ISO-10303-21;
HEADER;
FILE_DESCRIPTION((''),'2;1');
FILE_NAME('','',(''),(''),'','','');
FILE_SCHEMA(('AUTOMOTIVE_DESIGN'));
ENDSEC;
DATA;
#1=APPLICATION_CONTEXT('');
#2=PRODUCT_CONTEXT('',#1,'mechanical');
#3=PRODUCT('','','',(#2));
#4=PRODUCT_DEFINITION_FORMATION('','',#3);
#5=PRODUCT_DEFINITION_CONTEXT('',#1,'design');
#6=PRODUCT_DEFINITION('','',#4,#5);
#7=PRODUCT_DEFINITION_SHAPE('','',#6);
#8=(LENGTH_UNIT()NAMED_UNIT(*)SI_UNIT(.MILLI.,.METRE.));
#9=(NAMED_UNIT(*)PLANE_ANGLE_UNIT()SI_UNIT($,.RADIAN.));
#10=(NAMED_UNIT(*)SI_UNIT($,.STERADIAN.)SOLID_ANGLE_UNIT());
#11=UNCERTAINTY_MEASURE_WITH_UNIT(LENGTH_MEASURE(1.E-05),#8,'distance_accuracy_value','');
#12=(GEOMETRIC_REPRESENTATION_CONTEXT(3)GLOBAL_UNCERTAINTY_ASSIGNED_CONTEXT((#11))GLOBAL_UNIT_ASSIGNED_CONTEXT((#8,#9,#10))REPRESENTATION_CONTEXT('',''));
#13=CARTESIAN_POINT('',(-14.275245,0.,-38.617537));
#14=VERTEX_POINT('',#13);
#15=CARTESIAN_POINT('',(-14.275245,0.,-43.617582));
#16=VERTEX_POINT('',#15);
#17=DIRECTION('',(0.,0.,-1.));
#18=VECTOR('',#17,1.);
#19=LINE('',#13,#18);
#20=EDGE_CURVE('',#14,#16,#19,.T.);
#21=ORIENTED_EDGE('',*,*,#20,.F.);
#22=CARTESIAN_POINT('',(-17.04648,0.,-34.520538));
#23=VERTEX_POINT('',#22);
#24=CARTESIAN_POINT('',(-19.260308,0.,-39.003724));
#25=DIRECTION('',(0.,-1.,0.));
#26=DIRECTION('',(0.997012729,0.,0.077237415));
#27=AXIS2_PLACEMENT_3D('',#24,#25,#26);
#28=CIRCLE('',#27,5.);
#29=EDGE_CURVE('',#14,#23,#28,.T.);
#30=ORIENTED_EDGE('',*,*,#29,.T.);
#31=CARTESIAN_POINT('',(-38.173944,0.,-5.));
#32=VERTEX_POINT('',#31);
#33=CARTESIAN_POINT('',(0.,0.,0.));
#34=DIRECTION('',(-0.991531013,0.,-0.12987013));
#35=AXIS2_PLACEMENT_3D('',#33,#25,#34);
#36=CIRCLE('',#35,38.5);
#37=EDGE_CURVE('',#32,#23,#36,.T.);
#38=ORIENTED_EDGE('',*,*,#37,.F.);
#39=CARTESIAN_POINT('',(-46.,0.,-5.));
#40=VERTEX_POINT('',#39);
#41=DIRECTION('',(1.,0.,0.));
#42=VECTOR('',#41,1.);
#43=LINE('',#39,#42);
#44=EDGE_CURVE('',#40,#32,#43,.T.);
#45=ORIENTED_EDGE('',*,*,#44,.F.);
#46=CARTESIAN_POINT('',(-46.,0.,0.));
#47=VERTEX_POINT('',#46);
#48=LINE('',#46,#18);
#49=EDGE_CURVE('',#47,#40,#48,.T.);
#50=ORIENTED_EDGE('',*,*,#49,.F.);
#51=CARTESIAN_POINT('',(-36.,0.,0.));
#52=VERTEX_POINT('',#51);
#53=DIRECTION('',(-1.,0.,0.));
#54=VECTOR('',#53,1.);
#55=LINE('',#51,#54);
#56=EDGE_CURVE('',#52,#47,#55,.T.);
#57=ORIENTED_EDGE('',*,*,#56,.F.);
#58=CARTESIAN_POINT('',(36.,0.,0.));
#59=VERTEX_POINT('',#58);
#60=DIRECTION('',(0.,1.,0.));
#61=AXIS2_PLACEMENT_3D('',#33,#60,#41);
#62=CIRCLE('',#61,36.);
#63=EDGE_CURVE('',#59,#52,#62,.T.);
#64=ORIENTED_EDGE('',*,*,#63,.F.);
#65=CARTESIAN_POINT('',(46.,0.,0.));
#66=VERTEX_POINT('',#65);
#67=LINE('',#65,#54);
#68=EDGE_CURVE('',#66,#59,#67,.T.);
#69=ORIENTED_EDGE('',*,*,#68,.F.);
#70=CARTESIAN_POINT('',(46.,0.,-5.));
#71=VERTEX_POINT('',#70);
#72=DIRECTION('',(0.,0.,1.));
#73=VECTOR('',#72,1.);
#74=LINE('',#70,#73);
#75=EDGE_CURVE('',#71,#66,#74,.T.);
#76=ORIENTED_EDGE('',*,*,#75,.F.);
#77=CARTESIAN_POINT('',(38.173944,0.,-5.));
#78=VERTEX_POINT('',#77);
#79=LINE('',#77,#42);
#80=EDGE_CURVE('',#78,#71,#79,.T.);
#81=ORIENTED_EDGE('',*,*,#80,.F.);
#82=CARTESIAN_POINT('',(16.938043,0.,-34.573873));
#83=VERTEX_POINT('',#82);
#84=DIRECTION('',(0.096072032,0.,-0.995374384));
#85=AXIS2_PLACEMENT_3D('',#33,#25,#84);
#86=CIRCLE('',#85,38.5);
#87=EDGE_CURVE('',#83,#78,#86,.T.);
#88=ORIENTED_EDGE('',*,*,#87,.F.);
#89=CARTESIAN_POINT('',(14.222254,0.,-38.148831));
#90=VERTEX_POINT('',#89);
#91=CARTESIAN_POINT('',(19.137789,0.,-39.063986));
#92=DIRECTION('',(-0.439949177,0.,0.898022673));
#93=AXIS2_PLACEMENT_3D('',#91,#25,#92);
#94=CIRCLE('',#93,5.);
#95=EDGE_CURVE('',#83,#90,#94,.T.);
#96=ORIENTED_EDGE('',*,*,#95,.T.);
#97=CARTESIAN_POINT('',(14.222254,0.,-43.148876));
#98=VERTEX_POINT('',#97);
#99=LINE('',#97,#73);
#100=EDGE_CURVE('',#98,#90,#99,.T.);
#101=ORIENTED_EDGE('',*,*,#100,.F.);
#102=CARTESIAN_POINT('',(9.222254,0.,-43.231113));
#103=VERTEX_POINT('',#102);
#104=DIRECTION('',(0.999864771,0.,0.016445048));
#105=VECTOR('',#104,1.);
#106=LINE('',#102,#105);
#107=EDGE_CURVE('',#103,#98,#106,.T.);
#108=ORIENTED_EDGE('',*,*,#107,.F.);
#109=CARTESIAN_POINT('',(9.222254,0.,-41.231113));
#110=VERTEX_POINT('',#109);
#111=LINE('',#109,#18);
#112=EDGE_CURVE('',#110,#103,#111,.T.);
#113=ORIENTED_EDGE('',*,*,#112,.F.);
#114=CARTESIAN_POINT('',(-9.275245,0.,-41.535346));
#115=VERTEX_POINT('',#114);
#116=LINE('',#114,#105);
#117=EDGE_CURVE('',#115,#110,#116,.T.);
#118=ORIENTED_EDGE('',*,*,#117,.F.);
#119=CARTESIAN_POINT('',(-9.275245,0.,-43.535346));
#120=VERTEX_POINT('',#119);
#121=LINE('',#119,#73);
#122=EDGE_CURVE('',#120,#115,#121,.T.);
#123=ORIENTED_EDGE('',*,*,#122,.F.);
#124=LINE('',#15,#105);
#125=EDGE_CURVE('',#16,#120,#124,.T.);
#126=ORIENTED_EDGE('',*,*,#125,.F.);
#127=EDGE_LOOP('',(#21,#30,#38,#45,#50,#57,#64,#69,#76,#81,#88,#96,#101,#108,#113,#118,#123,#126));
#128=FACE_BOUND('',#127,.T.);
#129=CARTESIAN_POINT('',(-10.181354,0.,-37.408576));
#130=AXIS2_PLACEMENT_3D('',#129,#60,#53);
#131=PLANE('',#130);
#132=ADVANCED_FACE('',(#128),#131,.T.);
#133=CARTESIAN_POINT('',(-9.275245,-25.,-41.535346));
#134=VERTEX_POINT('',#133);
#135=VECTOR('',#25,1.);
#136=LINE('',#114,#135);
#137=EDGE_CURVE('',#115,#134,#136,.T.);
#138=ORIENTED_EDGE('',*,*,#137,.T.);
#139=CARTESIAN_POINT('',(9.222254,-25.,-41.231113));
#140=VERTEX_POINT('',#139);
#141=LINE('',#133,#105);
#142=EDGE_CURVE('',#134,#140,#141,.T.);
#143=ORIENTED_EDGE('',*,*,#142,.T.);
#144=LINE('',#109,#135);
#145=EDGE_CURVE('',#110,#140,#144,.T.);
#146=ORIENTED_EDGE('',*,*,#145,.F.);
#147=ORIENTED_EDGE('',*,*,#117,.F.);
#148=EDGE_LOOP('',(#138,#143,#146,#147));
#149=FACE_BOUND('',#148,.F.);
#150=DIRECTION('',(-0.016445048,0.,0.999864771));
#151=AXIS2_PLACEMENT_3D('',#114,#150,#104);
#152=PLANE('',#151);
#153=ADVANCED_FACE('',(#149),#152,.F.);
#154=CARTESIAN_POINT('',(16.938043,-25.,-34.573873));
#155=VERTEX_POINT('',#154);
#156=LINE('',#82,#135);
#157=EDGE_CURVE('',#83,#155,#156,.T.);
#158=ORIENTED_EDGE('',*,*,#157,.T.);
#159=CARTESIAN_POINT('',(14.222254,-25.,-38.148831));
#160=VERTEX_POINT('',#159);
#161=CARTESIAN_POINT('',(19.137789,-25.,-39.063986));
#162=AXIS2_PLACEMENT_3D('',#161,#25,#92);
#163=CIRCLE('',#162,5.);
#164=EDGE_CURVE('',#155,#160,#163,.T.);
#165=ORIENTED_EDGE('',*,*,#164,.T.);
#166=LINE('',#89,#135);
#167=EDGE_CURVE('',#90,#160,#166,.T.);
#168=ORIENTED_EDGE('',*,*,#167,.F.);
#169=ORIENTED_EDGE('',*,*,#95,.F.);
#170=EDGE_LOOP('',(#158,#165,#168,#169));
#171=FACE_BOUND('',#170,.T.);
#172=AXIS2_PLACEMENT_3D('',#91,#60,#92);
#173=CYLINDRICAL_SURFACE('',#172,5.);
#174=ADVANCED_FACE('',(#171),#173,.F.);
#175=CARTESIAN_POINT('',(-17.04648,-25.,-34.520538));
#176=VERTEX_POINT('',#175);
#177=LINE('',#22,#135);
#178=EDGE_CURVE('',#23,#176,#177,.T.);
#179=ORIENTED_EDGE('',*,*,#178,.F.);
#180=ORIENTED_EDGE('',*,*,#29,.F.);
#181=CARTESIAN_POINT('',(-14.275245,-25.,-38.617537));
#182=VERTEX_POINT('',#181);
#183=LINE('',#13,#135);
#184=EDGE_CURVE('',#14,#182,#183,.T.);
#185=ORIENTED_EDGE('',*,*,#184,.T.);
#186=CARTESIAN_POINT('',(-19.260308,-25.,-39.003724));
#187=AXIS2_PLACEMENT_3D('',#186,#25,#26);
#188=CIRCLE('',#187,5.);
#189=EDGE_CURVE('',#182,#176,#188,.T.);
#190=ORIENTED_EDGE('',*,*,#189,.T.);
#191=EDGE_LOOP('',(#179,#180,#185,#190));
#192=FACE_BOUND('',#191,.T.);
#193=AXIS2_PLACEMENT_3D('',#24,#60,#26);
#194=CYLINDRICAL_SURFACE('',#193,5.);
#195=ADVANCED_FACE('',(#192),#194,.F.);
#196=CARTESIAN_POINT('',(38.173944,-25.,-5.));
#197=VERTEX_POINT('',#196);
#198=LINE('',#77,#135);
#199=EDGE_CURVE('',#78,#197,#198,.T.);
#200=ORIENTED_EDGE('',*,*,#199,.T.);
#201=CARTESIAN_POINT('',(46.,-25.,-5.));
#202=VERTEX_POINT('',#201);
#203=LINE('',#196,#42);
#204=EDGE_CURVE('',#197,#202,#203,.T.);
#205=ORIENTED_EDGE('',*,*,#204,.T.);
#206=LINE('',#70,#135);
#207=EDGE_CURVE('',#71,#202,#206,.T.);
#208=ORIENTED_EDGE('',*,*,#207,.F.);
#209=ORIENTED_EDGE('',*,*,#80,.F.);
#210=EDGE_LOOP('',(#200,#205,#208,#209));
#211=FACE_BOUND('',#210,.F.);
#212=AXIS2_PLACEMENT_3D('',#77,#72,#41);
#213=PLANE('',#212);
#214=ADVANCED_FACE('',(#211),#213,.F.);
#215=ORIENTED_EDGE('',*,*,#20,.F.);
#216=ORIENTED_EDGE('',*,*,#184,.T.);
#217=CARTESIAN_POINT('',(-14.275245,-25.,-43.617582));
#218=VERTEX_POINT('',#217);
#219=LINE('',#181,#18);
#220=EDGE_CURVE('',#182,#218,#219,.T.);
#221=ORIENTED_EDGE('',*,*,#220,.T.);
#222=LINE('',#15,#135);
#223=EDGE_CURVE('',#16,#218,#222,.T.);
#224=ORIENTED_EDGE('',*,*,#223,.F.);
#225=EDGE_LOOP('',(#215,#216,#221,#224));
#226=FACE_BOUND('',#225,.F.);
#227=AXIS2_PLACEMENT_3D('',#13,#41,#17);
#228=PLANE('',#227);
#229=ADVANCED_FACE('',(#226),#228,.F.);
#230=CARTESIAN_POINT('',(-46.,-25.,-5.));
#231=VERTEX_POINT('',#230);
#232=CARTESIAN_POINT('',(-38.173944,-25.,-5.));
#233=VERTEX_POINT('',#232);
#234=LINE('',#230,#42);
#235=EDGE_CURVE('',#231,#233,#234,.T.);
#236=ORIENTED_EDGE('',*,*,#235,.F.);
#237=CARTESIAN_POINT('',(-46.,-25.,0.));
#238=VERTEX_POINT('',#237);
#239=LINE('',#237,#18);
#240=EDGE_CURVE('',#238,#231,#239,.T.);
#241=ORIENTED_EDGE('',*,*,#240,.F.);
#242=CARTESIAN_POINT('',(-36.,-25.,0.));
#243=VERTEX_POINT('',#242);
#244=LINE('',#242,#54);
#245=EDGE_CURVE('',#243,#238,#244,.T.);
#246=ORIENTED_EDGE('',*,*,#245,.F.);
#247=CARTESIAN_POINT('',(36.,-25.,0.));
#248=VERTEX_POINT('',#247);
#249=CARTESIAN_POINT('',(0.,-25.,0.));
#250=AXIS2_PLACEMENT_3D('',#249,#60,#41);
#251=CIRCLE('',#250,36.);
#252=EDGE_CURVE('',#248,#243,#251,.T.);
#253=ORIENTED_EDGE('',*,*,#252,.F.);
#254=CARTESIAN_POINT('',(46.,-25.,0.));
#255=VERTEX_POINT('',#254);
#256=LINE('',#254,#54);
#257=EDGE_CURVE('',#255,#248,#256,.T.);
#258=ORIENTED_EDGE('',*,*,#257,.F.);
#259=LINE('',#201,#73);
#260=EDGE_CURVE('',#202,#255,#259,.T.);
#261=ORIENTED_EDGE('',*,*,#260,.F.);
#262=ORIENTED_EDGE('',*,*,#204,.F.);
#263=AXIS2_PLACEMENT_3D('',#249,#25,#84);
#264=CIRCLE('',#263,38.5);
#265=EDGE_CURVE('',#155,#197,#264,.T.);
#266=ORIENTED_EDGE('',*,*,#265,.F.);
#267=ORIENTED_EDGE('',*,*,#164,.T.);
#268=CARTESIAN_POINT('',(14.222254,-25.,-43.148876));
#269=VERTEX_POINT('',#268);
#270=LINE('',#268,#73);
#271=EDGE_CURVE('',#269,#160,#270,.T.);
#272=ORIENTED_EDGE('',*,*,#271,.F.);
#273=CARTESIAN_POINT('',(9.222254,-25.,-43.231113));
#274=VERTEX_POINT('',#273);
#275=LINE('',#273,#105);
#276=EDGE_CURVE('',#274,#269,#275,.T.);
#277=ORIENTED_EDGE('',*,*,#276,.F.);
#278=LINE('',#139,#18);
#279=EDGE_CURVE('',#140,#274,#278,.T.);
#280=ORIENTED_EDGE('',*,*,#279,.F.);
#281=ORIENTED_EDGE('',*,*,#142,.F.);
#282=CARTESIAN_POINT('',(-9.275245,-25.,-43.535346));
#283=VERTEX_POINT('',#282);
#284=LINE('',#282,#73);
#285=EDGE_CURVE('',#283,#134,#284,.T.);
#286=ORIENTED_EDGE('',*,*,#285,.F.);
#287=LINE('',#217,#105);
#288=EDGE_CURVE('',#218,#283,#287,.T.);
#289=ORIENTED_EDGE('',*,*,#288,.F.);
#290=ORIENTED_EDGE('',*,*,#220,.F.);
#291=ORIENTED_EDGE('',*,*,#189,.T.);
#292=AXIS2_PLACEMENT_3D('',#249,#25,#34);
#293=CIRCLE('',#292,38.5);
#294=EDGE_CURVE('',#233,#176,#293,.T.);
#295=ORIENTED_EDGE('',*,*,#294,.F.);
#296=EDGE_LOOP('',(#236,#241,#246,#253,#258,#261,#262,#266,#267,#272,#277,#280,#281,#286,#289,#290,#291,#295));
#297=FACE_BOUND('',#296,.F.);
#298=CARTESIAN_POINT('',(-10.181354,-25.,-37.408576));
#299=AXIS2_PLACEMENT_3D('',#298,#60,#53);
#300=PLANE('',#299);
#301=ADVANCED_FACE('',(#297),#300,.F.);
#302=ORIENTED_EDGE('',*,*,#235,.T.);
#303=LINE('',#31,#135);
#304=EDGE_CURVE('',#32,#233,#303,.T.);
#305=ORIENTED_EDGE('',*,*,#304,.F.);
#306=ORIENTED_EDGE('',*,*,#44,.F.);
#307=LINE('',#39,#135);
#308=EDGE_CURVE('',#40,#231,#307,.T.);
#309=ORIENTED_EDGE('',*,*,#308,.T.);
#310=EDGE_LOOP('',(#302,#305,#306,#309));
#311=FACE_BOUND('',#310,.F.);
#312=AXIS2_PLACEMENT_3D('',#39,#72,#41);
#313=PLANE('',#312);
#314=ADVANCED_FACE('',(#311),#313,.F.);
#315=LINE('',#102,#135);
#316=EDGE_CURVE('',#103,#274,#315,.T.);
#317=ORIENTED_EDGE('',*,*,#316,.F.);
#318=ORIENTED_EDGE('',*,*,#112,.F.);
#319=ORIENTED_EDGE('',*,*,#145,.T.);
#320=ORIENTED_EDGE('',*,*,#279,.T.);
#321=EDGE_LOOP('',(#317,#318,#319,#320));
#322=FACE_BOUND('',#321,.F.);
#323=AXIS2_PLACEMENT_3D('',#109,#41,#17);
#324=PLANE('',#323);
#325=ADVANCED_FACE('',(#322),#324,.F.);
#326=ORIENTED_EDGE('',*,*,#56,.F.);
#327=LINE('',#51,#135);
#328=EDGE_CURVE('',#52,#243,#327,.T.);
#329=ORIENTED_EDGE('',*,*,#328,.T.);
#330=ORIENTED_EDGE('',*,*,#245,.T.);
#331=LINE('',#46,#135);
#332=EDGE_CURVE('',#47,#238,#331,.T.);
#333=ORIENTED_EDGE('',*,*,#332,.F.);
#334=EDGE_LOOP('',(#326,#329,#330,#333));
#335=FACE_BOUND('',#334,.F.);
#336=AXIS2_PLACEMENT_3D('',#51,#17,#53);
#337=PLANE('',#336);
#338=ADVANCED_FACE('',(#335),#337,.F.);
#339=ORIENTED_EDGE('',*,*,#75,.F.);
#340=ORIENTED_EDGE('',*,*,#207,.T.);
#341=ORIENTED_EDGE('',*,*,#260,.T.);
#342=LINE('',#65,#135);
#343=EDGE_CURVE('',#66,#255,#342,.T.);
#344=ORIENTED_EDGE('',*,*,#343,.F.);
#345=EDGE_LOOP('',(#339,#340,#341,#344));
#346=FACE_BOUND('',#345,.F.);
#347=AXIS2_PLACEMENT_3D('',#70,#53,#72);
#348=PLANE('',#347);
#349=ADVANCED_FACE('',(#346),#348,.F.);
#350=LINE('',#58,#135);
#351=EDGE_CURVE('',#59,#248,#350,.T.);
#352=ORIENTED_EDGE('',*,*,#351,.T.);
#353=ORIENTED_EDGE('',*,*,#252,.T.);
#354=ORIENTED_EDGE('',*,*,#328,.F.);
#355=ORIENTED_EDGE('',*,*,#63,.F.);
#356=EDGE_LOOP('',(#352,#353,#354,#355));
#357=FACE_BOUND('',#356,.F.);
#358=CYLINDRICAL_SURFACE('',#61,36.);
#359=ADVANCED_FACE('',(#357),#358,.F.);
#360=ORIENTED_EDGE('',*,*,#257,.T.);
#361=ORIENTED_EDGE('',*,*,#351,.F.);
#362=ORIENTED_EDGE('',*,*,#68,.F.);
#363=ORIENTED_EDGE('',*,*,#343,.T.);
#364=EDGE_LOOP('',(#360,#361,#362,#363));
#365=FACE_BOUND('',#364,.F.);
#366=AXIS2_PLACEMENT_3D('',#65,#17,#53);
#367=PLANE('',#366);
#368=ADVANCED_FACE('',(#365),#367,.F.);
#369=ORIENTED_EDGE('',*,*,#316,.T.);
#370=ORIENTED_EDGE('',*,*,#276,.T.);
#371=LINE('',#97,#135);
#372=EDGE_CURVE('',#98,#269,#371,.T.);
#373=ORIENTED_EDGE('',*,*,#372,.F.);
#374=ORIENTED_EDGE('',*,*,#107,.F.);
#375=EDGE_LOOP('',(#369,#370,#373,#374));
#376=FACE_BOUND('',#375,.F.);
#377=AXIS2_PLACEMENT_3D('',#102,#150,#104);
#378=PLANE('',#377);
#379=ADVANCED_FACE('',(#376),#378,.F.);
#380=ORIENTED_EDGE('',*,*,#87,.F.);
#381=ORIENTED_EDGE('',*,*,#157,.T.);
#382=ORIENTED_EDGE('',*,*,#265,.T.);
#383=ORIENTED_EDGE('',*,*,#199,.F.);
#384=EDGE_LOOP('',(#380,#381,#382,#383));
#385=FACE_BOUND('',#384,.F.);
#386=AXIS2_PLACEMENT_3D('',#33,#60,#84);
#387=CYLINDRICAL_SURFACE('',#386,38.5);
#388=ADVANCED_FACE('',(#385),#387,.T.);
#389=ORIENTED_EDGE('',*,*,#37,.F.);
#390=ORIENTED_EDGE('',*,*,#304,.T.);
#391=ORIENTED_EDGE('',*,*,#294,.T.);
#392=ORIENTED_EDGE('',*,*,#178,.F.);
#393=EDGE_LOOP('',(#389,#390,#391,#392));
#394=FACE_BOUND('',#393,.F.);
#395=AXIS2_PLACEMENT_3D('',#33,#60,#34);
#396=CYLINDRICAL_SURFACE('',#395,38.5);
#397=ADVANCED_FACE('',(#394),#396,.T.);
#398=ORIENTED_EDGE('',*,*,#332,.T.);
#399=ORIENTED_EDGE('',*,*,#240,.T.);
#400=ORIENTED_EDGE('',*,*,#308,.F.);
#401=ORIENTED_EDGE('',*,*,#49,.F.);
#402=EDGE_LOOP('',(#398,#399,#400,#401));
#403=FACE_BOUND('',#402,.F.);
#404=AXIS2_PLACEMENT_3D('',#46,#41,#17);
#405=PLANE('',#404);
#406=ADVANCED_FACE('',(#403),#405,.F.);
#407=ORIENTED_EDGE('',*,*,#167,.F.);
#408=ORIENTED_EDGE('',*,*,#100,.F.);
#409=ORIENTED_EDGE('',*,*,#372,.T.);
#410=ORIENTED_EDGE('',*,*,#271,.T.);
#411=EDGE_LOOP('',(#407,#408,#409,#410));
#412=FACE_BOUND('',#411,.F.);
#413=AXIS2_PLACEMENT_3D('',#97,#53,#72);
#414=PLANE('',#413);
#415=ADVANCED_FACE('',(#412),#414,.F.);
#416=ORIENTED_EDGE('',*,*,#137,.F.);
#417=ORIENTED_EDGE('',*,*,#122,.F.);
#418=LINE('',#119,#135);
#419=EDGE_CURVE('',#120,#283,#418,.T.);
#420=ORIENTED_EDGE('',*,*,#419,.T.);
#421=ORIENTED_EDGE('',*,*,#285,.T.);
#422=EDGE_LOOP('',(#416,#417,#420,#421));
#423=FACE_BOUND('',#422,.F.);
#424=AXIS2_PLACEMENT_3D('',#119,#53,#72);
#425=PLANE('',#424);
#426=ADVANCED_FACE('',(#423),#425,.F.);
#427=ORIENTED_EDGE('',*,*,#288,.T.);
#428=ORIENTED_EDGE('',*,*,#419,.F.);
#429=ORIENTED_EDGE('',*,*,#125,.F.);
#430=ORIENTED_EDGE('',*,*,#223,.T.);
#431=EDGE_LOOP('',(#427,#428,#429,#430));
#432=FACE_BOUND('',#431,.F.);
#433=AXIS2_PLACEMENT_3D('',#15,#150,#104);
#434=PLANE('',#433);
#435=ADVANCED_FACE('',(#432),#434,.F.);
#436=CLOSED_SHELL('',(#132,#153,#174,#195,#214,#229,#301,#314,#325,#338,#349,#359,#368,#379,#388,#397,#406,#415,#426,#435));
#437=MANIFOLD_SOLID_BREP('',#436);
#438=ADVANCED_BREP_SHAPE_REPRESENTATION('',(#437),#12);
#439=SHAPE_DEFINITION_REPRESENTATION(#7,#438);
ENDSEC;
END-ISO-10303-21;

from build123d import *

# Parameters (mm, degrees)
F1_DEPTH    = 25
F2_T1_DEPTH = 25


# Not quite as in the source:
# - a fillet or chamfer that OpenCascade refuses, or shapes differently, is made with other operations: its cross-section is extruded or revolved along the edge and cut away or added


with BuildPart() as f1:
    # F0 (on Front) → F1 (new body)
    with BuildSketch(Plane.XZ):
        with BuildLine():
            ThreePointArc((36, 0), (0, -36), (-36, 0))
            Line((-36, 0), (-38.5, 0))
            Line((-38.5, 0), (-46, 0))
            Line((-46, 0), (-46, -5))
            Line((-46, -5), (-38.1739439933, -5))
            ThreePointArc((-38.1739439933, -5), (-26.2977937101, -28.1189623916), (-2.4365316343, -38.4228228218))
            Line((-2.4365316343, -38.4228228218), (-14.2752447595, -38.6175373625))
            Line((-14.2752447595, -38.6175373625), (-14.2752447595, -43.6175822914))
            Line((-14.2752447595, -43.6175822914), (-9.2752447595, -43.5353459289))
            Line((-9.2752447595, -43.5353459289), (-9.2752447595, -41.5353459289))
            Line((-9.2752447595, -41.5353459289), (9.222253505, -41.2311125346))
            Line((9.222253505, -41.2311125346), (9.222253505, -43.2311125346))
            Line((9.222253505, -43.2311125346), (14.222253505, -43.1488761722))
            Line((14.222253505, -43.1488761722), (14.222253505, -38.1488312433))
            Line((14.222253505, -38.1488312433), (3.6987732294, -38.3219137909))
            ThreePointArc((3.6987732294, -38.3219137909), (26.7566551829, -27.682691405), (38.1739439933, -5))
            Line((38.1739439933, -5), (46, -5))
            Line((46, -5), (46, 0))
            Line((46, 0), (38.5, 0))
            Line((38.5, 0), (36, 0))
        make_face()
    extrude(amount=F1_DEPTH)

    # F2: fillet of radius 5 on 2 edges, made by hand

    # F2_s2 → F2_t1 (join)
    with BuildSketch(Plane.XZ):
        with BuildLine():
            ThreePointArc((-14.2752447595, -38.6175373625), (-15.118767178, -36.2023611517), (-17.0464798519, -34.5205377226))
            ThreePointArc((-17.0464798519, -34.5205377226), (-9.9349832104, -37.1960496371), (-2.4365316343, -38.4228228218))
            Line((-2.4365316343, -38.4228228218), (-14.2752447595, -38.6175373625))
        make_face()
        with BuildLine():
            ThreePointArc((16.9380433228, -34.5738729158), (15.1563460299, -36.0394019773), (14.222253505, -38.1488312433))
            Line((14.222253505, -38.1488312433), (3.6987732294, -38.3219137909))
            ThreePointArc((3.6987732294, -38.3219137909), (10.4872065848, -37.0441425606), (16.9380433228, -34.5738729158))
        make_face()
    extrude(amount=F2_T1_DEPTH)


solid = f1.part
